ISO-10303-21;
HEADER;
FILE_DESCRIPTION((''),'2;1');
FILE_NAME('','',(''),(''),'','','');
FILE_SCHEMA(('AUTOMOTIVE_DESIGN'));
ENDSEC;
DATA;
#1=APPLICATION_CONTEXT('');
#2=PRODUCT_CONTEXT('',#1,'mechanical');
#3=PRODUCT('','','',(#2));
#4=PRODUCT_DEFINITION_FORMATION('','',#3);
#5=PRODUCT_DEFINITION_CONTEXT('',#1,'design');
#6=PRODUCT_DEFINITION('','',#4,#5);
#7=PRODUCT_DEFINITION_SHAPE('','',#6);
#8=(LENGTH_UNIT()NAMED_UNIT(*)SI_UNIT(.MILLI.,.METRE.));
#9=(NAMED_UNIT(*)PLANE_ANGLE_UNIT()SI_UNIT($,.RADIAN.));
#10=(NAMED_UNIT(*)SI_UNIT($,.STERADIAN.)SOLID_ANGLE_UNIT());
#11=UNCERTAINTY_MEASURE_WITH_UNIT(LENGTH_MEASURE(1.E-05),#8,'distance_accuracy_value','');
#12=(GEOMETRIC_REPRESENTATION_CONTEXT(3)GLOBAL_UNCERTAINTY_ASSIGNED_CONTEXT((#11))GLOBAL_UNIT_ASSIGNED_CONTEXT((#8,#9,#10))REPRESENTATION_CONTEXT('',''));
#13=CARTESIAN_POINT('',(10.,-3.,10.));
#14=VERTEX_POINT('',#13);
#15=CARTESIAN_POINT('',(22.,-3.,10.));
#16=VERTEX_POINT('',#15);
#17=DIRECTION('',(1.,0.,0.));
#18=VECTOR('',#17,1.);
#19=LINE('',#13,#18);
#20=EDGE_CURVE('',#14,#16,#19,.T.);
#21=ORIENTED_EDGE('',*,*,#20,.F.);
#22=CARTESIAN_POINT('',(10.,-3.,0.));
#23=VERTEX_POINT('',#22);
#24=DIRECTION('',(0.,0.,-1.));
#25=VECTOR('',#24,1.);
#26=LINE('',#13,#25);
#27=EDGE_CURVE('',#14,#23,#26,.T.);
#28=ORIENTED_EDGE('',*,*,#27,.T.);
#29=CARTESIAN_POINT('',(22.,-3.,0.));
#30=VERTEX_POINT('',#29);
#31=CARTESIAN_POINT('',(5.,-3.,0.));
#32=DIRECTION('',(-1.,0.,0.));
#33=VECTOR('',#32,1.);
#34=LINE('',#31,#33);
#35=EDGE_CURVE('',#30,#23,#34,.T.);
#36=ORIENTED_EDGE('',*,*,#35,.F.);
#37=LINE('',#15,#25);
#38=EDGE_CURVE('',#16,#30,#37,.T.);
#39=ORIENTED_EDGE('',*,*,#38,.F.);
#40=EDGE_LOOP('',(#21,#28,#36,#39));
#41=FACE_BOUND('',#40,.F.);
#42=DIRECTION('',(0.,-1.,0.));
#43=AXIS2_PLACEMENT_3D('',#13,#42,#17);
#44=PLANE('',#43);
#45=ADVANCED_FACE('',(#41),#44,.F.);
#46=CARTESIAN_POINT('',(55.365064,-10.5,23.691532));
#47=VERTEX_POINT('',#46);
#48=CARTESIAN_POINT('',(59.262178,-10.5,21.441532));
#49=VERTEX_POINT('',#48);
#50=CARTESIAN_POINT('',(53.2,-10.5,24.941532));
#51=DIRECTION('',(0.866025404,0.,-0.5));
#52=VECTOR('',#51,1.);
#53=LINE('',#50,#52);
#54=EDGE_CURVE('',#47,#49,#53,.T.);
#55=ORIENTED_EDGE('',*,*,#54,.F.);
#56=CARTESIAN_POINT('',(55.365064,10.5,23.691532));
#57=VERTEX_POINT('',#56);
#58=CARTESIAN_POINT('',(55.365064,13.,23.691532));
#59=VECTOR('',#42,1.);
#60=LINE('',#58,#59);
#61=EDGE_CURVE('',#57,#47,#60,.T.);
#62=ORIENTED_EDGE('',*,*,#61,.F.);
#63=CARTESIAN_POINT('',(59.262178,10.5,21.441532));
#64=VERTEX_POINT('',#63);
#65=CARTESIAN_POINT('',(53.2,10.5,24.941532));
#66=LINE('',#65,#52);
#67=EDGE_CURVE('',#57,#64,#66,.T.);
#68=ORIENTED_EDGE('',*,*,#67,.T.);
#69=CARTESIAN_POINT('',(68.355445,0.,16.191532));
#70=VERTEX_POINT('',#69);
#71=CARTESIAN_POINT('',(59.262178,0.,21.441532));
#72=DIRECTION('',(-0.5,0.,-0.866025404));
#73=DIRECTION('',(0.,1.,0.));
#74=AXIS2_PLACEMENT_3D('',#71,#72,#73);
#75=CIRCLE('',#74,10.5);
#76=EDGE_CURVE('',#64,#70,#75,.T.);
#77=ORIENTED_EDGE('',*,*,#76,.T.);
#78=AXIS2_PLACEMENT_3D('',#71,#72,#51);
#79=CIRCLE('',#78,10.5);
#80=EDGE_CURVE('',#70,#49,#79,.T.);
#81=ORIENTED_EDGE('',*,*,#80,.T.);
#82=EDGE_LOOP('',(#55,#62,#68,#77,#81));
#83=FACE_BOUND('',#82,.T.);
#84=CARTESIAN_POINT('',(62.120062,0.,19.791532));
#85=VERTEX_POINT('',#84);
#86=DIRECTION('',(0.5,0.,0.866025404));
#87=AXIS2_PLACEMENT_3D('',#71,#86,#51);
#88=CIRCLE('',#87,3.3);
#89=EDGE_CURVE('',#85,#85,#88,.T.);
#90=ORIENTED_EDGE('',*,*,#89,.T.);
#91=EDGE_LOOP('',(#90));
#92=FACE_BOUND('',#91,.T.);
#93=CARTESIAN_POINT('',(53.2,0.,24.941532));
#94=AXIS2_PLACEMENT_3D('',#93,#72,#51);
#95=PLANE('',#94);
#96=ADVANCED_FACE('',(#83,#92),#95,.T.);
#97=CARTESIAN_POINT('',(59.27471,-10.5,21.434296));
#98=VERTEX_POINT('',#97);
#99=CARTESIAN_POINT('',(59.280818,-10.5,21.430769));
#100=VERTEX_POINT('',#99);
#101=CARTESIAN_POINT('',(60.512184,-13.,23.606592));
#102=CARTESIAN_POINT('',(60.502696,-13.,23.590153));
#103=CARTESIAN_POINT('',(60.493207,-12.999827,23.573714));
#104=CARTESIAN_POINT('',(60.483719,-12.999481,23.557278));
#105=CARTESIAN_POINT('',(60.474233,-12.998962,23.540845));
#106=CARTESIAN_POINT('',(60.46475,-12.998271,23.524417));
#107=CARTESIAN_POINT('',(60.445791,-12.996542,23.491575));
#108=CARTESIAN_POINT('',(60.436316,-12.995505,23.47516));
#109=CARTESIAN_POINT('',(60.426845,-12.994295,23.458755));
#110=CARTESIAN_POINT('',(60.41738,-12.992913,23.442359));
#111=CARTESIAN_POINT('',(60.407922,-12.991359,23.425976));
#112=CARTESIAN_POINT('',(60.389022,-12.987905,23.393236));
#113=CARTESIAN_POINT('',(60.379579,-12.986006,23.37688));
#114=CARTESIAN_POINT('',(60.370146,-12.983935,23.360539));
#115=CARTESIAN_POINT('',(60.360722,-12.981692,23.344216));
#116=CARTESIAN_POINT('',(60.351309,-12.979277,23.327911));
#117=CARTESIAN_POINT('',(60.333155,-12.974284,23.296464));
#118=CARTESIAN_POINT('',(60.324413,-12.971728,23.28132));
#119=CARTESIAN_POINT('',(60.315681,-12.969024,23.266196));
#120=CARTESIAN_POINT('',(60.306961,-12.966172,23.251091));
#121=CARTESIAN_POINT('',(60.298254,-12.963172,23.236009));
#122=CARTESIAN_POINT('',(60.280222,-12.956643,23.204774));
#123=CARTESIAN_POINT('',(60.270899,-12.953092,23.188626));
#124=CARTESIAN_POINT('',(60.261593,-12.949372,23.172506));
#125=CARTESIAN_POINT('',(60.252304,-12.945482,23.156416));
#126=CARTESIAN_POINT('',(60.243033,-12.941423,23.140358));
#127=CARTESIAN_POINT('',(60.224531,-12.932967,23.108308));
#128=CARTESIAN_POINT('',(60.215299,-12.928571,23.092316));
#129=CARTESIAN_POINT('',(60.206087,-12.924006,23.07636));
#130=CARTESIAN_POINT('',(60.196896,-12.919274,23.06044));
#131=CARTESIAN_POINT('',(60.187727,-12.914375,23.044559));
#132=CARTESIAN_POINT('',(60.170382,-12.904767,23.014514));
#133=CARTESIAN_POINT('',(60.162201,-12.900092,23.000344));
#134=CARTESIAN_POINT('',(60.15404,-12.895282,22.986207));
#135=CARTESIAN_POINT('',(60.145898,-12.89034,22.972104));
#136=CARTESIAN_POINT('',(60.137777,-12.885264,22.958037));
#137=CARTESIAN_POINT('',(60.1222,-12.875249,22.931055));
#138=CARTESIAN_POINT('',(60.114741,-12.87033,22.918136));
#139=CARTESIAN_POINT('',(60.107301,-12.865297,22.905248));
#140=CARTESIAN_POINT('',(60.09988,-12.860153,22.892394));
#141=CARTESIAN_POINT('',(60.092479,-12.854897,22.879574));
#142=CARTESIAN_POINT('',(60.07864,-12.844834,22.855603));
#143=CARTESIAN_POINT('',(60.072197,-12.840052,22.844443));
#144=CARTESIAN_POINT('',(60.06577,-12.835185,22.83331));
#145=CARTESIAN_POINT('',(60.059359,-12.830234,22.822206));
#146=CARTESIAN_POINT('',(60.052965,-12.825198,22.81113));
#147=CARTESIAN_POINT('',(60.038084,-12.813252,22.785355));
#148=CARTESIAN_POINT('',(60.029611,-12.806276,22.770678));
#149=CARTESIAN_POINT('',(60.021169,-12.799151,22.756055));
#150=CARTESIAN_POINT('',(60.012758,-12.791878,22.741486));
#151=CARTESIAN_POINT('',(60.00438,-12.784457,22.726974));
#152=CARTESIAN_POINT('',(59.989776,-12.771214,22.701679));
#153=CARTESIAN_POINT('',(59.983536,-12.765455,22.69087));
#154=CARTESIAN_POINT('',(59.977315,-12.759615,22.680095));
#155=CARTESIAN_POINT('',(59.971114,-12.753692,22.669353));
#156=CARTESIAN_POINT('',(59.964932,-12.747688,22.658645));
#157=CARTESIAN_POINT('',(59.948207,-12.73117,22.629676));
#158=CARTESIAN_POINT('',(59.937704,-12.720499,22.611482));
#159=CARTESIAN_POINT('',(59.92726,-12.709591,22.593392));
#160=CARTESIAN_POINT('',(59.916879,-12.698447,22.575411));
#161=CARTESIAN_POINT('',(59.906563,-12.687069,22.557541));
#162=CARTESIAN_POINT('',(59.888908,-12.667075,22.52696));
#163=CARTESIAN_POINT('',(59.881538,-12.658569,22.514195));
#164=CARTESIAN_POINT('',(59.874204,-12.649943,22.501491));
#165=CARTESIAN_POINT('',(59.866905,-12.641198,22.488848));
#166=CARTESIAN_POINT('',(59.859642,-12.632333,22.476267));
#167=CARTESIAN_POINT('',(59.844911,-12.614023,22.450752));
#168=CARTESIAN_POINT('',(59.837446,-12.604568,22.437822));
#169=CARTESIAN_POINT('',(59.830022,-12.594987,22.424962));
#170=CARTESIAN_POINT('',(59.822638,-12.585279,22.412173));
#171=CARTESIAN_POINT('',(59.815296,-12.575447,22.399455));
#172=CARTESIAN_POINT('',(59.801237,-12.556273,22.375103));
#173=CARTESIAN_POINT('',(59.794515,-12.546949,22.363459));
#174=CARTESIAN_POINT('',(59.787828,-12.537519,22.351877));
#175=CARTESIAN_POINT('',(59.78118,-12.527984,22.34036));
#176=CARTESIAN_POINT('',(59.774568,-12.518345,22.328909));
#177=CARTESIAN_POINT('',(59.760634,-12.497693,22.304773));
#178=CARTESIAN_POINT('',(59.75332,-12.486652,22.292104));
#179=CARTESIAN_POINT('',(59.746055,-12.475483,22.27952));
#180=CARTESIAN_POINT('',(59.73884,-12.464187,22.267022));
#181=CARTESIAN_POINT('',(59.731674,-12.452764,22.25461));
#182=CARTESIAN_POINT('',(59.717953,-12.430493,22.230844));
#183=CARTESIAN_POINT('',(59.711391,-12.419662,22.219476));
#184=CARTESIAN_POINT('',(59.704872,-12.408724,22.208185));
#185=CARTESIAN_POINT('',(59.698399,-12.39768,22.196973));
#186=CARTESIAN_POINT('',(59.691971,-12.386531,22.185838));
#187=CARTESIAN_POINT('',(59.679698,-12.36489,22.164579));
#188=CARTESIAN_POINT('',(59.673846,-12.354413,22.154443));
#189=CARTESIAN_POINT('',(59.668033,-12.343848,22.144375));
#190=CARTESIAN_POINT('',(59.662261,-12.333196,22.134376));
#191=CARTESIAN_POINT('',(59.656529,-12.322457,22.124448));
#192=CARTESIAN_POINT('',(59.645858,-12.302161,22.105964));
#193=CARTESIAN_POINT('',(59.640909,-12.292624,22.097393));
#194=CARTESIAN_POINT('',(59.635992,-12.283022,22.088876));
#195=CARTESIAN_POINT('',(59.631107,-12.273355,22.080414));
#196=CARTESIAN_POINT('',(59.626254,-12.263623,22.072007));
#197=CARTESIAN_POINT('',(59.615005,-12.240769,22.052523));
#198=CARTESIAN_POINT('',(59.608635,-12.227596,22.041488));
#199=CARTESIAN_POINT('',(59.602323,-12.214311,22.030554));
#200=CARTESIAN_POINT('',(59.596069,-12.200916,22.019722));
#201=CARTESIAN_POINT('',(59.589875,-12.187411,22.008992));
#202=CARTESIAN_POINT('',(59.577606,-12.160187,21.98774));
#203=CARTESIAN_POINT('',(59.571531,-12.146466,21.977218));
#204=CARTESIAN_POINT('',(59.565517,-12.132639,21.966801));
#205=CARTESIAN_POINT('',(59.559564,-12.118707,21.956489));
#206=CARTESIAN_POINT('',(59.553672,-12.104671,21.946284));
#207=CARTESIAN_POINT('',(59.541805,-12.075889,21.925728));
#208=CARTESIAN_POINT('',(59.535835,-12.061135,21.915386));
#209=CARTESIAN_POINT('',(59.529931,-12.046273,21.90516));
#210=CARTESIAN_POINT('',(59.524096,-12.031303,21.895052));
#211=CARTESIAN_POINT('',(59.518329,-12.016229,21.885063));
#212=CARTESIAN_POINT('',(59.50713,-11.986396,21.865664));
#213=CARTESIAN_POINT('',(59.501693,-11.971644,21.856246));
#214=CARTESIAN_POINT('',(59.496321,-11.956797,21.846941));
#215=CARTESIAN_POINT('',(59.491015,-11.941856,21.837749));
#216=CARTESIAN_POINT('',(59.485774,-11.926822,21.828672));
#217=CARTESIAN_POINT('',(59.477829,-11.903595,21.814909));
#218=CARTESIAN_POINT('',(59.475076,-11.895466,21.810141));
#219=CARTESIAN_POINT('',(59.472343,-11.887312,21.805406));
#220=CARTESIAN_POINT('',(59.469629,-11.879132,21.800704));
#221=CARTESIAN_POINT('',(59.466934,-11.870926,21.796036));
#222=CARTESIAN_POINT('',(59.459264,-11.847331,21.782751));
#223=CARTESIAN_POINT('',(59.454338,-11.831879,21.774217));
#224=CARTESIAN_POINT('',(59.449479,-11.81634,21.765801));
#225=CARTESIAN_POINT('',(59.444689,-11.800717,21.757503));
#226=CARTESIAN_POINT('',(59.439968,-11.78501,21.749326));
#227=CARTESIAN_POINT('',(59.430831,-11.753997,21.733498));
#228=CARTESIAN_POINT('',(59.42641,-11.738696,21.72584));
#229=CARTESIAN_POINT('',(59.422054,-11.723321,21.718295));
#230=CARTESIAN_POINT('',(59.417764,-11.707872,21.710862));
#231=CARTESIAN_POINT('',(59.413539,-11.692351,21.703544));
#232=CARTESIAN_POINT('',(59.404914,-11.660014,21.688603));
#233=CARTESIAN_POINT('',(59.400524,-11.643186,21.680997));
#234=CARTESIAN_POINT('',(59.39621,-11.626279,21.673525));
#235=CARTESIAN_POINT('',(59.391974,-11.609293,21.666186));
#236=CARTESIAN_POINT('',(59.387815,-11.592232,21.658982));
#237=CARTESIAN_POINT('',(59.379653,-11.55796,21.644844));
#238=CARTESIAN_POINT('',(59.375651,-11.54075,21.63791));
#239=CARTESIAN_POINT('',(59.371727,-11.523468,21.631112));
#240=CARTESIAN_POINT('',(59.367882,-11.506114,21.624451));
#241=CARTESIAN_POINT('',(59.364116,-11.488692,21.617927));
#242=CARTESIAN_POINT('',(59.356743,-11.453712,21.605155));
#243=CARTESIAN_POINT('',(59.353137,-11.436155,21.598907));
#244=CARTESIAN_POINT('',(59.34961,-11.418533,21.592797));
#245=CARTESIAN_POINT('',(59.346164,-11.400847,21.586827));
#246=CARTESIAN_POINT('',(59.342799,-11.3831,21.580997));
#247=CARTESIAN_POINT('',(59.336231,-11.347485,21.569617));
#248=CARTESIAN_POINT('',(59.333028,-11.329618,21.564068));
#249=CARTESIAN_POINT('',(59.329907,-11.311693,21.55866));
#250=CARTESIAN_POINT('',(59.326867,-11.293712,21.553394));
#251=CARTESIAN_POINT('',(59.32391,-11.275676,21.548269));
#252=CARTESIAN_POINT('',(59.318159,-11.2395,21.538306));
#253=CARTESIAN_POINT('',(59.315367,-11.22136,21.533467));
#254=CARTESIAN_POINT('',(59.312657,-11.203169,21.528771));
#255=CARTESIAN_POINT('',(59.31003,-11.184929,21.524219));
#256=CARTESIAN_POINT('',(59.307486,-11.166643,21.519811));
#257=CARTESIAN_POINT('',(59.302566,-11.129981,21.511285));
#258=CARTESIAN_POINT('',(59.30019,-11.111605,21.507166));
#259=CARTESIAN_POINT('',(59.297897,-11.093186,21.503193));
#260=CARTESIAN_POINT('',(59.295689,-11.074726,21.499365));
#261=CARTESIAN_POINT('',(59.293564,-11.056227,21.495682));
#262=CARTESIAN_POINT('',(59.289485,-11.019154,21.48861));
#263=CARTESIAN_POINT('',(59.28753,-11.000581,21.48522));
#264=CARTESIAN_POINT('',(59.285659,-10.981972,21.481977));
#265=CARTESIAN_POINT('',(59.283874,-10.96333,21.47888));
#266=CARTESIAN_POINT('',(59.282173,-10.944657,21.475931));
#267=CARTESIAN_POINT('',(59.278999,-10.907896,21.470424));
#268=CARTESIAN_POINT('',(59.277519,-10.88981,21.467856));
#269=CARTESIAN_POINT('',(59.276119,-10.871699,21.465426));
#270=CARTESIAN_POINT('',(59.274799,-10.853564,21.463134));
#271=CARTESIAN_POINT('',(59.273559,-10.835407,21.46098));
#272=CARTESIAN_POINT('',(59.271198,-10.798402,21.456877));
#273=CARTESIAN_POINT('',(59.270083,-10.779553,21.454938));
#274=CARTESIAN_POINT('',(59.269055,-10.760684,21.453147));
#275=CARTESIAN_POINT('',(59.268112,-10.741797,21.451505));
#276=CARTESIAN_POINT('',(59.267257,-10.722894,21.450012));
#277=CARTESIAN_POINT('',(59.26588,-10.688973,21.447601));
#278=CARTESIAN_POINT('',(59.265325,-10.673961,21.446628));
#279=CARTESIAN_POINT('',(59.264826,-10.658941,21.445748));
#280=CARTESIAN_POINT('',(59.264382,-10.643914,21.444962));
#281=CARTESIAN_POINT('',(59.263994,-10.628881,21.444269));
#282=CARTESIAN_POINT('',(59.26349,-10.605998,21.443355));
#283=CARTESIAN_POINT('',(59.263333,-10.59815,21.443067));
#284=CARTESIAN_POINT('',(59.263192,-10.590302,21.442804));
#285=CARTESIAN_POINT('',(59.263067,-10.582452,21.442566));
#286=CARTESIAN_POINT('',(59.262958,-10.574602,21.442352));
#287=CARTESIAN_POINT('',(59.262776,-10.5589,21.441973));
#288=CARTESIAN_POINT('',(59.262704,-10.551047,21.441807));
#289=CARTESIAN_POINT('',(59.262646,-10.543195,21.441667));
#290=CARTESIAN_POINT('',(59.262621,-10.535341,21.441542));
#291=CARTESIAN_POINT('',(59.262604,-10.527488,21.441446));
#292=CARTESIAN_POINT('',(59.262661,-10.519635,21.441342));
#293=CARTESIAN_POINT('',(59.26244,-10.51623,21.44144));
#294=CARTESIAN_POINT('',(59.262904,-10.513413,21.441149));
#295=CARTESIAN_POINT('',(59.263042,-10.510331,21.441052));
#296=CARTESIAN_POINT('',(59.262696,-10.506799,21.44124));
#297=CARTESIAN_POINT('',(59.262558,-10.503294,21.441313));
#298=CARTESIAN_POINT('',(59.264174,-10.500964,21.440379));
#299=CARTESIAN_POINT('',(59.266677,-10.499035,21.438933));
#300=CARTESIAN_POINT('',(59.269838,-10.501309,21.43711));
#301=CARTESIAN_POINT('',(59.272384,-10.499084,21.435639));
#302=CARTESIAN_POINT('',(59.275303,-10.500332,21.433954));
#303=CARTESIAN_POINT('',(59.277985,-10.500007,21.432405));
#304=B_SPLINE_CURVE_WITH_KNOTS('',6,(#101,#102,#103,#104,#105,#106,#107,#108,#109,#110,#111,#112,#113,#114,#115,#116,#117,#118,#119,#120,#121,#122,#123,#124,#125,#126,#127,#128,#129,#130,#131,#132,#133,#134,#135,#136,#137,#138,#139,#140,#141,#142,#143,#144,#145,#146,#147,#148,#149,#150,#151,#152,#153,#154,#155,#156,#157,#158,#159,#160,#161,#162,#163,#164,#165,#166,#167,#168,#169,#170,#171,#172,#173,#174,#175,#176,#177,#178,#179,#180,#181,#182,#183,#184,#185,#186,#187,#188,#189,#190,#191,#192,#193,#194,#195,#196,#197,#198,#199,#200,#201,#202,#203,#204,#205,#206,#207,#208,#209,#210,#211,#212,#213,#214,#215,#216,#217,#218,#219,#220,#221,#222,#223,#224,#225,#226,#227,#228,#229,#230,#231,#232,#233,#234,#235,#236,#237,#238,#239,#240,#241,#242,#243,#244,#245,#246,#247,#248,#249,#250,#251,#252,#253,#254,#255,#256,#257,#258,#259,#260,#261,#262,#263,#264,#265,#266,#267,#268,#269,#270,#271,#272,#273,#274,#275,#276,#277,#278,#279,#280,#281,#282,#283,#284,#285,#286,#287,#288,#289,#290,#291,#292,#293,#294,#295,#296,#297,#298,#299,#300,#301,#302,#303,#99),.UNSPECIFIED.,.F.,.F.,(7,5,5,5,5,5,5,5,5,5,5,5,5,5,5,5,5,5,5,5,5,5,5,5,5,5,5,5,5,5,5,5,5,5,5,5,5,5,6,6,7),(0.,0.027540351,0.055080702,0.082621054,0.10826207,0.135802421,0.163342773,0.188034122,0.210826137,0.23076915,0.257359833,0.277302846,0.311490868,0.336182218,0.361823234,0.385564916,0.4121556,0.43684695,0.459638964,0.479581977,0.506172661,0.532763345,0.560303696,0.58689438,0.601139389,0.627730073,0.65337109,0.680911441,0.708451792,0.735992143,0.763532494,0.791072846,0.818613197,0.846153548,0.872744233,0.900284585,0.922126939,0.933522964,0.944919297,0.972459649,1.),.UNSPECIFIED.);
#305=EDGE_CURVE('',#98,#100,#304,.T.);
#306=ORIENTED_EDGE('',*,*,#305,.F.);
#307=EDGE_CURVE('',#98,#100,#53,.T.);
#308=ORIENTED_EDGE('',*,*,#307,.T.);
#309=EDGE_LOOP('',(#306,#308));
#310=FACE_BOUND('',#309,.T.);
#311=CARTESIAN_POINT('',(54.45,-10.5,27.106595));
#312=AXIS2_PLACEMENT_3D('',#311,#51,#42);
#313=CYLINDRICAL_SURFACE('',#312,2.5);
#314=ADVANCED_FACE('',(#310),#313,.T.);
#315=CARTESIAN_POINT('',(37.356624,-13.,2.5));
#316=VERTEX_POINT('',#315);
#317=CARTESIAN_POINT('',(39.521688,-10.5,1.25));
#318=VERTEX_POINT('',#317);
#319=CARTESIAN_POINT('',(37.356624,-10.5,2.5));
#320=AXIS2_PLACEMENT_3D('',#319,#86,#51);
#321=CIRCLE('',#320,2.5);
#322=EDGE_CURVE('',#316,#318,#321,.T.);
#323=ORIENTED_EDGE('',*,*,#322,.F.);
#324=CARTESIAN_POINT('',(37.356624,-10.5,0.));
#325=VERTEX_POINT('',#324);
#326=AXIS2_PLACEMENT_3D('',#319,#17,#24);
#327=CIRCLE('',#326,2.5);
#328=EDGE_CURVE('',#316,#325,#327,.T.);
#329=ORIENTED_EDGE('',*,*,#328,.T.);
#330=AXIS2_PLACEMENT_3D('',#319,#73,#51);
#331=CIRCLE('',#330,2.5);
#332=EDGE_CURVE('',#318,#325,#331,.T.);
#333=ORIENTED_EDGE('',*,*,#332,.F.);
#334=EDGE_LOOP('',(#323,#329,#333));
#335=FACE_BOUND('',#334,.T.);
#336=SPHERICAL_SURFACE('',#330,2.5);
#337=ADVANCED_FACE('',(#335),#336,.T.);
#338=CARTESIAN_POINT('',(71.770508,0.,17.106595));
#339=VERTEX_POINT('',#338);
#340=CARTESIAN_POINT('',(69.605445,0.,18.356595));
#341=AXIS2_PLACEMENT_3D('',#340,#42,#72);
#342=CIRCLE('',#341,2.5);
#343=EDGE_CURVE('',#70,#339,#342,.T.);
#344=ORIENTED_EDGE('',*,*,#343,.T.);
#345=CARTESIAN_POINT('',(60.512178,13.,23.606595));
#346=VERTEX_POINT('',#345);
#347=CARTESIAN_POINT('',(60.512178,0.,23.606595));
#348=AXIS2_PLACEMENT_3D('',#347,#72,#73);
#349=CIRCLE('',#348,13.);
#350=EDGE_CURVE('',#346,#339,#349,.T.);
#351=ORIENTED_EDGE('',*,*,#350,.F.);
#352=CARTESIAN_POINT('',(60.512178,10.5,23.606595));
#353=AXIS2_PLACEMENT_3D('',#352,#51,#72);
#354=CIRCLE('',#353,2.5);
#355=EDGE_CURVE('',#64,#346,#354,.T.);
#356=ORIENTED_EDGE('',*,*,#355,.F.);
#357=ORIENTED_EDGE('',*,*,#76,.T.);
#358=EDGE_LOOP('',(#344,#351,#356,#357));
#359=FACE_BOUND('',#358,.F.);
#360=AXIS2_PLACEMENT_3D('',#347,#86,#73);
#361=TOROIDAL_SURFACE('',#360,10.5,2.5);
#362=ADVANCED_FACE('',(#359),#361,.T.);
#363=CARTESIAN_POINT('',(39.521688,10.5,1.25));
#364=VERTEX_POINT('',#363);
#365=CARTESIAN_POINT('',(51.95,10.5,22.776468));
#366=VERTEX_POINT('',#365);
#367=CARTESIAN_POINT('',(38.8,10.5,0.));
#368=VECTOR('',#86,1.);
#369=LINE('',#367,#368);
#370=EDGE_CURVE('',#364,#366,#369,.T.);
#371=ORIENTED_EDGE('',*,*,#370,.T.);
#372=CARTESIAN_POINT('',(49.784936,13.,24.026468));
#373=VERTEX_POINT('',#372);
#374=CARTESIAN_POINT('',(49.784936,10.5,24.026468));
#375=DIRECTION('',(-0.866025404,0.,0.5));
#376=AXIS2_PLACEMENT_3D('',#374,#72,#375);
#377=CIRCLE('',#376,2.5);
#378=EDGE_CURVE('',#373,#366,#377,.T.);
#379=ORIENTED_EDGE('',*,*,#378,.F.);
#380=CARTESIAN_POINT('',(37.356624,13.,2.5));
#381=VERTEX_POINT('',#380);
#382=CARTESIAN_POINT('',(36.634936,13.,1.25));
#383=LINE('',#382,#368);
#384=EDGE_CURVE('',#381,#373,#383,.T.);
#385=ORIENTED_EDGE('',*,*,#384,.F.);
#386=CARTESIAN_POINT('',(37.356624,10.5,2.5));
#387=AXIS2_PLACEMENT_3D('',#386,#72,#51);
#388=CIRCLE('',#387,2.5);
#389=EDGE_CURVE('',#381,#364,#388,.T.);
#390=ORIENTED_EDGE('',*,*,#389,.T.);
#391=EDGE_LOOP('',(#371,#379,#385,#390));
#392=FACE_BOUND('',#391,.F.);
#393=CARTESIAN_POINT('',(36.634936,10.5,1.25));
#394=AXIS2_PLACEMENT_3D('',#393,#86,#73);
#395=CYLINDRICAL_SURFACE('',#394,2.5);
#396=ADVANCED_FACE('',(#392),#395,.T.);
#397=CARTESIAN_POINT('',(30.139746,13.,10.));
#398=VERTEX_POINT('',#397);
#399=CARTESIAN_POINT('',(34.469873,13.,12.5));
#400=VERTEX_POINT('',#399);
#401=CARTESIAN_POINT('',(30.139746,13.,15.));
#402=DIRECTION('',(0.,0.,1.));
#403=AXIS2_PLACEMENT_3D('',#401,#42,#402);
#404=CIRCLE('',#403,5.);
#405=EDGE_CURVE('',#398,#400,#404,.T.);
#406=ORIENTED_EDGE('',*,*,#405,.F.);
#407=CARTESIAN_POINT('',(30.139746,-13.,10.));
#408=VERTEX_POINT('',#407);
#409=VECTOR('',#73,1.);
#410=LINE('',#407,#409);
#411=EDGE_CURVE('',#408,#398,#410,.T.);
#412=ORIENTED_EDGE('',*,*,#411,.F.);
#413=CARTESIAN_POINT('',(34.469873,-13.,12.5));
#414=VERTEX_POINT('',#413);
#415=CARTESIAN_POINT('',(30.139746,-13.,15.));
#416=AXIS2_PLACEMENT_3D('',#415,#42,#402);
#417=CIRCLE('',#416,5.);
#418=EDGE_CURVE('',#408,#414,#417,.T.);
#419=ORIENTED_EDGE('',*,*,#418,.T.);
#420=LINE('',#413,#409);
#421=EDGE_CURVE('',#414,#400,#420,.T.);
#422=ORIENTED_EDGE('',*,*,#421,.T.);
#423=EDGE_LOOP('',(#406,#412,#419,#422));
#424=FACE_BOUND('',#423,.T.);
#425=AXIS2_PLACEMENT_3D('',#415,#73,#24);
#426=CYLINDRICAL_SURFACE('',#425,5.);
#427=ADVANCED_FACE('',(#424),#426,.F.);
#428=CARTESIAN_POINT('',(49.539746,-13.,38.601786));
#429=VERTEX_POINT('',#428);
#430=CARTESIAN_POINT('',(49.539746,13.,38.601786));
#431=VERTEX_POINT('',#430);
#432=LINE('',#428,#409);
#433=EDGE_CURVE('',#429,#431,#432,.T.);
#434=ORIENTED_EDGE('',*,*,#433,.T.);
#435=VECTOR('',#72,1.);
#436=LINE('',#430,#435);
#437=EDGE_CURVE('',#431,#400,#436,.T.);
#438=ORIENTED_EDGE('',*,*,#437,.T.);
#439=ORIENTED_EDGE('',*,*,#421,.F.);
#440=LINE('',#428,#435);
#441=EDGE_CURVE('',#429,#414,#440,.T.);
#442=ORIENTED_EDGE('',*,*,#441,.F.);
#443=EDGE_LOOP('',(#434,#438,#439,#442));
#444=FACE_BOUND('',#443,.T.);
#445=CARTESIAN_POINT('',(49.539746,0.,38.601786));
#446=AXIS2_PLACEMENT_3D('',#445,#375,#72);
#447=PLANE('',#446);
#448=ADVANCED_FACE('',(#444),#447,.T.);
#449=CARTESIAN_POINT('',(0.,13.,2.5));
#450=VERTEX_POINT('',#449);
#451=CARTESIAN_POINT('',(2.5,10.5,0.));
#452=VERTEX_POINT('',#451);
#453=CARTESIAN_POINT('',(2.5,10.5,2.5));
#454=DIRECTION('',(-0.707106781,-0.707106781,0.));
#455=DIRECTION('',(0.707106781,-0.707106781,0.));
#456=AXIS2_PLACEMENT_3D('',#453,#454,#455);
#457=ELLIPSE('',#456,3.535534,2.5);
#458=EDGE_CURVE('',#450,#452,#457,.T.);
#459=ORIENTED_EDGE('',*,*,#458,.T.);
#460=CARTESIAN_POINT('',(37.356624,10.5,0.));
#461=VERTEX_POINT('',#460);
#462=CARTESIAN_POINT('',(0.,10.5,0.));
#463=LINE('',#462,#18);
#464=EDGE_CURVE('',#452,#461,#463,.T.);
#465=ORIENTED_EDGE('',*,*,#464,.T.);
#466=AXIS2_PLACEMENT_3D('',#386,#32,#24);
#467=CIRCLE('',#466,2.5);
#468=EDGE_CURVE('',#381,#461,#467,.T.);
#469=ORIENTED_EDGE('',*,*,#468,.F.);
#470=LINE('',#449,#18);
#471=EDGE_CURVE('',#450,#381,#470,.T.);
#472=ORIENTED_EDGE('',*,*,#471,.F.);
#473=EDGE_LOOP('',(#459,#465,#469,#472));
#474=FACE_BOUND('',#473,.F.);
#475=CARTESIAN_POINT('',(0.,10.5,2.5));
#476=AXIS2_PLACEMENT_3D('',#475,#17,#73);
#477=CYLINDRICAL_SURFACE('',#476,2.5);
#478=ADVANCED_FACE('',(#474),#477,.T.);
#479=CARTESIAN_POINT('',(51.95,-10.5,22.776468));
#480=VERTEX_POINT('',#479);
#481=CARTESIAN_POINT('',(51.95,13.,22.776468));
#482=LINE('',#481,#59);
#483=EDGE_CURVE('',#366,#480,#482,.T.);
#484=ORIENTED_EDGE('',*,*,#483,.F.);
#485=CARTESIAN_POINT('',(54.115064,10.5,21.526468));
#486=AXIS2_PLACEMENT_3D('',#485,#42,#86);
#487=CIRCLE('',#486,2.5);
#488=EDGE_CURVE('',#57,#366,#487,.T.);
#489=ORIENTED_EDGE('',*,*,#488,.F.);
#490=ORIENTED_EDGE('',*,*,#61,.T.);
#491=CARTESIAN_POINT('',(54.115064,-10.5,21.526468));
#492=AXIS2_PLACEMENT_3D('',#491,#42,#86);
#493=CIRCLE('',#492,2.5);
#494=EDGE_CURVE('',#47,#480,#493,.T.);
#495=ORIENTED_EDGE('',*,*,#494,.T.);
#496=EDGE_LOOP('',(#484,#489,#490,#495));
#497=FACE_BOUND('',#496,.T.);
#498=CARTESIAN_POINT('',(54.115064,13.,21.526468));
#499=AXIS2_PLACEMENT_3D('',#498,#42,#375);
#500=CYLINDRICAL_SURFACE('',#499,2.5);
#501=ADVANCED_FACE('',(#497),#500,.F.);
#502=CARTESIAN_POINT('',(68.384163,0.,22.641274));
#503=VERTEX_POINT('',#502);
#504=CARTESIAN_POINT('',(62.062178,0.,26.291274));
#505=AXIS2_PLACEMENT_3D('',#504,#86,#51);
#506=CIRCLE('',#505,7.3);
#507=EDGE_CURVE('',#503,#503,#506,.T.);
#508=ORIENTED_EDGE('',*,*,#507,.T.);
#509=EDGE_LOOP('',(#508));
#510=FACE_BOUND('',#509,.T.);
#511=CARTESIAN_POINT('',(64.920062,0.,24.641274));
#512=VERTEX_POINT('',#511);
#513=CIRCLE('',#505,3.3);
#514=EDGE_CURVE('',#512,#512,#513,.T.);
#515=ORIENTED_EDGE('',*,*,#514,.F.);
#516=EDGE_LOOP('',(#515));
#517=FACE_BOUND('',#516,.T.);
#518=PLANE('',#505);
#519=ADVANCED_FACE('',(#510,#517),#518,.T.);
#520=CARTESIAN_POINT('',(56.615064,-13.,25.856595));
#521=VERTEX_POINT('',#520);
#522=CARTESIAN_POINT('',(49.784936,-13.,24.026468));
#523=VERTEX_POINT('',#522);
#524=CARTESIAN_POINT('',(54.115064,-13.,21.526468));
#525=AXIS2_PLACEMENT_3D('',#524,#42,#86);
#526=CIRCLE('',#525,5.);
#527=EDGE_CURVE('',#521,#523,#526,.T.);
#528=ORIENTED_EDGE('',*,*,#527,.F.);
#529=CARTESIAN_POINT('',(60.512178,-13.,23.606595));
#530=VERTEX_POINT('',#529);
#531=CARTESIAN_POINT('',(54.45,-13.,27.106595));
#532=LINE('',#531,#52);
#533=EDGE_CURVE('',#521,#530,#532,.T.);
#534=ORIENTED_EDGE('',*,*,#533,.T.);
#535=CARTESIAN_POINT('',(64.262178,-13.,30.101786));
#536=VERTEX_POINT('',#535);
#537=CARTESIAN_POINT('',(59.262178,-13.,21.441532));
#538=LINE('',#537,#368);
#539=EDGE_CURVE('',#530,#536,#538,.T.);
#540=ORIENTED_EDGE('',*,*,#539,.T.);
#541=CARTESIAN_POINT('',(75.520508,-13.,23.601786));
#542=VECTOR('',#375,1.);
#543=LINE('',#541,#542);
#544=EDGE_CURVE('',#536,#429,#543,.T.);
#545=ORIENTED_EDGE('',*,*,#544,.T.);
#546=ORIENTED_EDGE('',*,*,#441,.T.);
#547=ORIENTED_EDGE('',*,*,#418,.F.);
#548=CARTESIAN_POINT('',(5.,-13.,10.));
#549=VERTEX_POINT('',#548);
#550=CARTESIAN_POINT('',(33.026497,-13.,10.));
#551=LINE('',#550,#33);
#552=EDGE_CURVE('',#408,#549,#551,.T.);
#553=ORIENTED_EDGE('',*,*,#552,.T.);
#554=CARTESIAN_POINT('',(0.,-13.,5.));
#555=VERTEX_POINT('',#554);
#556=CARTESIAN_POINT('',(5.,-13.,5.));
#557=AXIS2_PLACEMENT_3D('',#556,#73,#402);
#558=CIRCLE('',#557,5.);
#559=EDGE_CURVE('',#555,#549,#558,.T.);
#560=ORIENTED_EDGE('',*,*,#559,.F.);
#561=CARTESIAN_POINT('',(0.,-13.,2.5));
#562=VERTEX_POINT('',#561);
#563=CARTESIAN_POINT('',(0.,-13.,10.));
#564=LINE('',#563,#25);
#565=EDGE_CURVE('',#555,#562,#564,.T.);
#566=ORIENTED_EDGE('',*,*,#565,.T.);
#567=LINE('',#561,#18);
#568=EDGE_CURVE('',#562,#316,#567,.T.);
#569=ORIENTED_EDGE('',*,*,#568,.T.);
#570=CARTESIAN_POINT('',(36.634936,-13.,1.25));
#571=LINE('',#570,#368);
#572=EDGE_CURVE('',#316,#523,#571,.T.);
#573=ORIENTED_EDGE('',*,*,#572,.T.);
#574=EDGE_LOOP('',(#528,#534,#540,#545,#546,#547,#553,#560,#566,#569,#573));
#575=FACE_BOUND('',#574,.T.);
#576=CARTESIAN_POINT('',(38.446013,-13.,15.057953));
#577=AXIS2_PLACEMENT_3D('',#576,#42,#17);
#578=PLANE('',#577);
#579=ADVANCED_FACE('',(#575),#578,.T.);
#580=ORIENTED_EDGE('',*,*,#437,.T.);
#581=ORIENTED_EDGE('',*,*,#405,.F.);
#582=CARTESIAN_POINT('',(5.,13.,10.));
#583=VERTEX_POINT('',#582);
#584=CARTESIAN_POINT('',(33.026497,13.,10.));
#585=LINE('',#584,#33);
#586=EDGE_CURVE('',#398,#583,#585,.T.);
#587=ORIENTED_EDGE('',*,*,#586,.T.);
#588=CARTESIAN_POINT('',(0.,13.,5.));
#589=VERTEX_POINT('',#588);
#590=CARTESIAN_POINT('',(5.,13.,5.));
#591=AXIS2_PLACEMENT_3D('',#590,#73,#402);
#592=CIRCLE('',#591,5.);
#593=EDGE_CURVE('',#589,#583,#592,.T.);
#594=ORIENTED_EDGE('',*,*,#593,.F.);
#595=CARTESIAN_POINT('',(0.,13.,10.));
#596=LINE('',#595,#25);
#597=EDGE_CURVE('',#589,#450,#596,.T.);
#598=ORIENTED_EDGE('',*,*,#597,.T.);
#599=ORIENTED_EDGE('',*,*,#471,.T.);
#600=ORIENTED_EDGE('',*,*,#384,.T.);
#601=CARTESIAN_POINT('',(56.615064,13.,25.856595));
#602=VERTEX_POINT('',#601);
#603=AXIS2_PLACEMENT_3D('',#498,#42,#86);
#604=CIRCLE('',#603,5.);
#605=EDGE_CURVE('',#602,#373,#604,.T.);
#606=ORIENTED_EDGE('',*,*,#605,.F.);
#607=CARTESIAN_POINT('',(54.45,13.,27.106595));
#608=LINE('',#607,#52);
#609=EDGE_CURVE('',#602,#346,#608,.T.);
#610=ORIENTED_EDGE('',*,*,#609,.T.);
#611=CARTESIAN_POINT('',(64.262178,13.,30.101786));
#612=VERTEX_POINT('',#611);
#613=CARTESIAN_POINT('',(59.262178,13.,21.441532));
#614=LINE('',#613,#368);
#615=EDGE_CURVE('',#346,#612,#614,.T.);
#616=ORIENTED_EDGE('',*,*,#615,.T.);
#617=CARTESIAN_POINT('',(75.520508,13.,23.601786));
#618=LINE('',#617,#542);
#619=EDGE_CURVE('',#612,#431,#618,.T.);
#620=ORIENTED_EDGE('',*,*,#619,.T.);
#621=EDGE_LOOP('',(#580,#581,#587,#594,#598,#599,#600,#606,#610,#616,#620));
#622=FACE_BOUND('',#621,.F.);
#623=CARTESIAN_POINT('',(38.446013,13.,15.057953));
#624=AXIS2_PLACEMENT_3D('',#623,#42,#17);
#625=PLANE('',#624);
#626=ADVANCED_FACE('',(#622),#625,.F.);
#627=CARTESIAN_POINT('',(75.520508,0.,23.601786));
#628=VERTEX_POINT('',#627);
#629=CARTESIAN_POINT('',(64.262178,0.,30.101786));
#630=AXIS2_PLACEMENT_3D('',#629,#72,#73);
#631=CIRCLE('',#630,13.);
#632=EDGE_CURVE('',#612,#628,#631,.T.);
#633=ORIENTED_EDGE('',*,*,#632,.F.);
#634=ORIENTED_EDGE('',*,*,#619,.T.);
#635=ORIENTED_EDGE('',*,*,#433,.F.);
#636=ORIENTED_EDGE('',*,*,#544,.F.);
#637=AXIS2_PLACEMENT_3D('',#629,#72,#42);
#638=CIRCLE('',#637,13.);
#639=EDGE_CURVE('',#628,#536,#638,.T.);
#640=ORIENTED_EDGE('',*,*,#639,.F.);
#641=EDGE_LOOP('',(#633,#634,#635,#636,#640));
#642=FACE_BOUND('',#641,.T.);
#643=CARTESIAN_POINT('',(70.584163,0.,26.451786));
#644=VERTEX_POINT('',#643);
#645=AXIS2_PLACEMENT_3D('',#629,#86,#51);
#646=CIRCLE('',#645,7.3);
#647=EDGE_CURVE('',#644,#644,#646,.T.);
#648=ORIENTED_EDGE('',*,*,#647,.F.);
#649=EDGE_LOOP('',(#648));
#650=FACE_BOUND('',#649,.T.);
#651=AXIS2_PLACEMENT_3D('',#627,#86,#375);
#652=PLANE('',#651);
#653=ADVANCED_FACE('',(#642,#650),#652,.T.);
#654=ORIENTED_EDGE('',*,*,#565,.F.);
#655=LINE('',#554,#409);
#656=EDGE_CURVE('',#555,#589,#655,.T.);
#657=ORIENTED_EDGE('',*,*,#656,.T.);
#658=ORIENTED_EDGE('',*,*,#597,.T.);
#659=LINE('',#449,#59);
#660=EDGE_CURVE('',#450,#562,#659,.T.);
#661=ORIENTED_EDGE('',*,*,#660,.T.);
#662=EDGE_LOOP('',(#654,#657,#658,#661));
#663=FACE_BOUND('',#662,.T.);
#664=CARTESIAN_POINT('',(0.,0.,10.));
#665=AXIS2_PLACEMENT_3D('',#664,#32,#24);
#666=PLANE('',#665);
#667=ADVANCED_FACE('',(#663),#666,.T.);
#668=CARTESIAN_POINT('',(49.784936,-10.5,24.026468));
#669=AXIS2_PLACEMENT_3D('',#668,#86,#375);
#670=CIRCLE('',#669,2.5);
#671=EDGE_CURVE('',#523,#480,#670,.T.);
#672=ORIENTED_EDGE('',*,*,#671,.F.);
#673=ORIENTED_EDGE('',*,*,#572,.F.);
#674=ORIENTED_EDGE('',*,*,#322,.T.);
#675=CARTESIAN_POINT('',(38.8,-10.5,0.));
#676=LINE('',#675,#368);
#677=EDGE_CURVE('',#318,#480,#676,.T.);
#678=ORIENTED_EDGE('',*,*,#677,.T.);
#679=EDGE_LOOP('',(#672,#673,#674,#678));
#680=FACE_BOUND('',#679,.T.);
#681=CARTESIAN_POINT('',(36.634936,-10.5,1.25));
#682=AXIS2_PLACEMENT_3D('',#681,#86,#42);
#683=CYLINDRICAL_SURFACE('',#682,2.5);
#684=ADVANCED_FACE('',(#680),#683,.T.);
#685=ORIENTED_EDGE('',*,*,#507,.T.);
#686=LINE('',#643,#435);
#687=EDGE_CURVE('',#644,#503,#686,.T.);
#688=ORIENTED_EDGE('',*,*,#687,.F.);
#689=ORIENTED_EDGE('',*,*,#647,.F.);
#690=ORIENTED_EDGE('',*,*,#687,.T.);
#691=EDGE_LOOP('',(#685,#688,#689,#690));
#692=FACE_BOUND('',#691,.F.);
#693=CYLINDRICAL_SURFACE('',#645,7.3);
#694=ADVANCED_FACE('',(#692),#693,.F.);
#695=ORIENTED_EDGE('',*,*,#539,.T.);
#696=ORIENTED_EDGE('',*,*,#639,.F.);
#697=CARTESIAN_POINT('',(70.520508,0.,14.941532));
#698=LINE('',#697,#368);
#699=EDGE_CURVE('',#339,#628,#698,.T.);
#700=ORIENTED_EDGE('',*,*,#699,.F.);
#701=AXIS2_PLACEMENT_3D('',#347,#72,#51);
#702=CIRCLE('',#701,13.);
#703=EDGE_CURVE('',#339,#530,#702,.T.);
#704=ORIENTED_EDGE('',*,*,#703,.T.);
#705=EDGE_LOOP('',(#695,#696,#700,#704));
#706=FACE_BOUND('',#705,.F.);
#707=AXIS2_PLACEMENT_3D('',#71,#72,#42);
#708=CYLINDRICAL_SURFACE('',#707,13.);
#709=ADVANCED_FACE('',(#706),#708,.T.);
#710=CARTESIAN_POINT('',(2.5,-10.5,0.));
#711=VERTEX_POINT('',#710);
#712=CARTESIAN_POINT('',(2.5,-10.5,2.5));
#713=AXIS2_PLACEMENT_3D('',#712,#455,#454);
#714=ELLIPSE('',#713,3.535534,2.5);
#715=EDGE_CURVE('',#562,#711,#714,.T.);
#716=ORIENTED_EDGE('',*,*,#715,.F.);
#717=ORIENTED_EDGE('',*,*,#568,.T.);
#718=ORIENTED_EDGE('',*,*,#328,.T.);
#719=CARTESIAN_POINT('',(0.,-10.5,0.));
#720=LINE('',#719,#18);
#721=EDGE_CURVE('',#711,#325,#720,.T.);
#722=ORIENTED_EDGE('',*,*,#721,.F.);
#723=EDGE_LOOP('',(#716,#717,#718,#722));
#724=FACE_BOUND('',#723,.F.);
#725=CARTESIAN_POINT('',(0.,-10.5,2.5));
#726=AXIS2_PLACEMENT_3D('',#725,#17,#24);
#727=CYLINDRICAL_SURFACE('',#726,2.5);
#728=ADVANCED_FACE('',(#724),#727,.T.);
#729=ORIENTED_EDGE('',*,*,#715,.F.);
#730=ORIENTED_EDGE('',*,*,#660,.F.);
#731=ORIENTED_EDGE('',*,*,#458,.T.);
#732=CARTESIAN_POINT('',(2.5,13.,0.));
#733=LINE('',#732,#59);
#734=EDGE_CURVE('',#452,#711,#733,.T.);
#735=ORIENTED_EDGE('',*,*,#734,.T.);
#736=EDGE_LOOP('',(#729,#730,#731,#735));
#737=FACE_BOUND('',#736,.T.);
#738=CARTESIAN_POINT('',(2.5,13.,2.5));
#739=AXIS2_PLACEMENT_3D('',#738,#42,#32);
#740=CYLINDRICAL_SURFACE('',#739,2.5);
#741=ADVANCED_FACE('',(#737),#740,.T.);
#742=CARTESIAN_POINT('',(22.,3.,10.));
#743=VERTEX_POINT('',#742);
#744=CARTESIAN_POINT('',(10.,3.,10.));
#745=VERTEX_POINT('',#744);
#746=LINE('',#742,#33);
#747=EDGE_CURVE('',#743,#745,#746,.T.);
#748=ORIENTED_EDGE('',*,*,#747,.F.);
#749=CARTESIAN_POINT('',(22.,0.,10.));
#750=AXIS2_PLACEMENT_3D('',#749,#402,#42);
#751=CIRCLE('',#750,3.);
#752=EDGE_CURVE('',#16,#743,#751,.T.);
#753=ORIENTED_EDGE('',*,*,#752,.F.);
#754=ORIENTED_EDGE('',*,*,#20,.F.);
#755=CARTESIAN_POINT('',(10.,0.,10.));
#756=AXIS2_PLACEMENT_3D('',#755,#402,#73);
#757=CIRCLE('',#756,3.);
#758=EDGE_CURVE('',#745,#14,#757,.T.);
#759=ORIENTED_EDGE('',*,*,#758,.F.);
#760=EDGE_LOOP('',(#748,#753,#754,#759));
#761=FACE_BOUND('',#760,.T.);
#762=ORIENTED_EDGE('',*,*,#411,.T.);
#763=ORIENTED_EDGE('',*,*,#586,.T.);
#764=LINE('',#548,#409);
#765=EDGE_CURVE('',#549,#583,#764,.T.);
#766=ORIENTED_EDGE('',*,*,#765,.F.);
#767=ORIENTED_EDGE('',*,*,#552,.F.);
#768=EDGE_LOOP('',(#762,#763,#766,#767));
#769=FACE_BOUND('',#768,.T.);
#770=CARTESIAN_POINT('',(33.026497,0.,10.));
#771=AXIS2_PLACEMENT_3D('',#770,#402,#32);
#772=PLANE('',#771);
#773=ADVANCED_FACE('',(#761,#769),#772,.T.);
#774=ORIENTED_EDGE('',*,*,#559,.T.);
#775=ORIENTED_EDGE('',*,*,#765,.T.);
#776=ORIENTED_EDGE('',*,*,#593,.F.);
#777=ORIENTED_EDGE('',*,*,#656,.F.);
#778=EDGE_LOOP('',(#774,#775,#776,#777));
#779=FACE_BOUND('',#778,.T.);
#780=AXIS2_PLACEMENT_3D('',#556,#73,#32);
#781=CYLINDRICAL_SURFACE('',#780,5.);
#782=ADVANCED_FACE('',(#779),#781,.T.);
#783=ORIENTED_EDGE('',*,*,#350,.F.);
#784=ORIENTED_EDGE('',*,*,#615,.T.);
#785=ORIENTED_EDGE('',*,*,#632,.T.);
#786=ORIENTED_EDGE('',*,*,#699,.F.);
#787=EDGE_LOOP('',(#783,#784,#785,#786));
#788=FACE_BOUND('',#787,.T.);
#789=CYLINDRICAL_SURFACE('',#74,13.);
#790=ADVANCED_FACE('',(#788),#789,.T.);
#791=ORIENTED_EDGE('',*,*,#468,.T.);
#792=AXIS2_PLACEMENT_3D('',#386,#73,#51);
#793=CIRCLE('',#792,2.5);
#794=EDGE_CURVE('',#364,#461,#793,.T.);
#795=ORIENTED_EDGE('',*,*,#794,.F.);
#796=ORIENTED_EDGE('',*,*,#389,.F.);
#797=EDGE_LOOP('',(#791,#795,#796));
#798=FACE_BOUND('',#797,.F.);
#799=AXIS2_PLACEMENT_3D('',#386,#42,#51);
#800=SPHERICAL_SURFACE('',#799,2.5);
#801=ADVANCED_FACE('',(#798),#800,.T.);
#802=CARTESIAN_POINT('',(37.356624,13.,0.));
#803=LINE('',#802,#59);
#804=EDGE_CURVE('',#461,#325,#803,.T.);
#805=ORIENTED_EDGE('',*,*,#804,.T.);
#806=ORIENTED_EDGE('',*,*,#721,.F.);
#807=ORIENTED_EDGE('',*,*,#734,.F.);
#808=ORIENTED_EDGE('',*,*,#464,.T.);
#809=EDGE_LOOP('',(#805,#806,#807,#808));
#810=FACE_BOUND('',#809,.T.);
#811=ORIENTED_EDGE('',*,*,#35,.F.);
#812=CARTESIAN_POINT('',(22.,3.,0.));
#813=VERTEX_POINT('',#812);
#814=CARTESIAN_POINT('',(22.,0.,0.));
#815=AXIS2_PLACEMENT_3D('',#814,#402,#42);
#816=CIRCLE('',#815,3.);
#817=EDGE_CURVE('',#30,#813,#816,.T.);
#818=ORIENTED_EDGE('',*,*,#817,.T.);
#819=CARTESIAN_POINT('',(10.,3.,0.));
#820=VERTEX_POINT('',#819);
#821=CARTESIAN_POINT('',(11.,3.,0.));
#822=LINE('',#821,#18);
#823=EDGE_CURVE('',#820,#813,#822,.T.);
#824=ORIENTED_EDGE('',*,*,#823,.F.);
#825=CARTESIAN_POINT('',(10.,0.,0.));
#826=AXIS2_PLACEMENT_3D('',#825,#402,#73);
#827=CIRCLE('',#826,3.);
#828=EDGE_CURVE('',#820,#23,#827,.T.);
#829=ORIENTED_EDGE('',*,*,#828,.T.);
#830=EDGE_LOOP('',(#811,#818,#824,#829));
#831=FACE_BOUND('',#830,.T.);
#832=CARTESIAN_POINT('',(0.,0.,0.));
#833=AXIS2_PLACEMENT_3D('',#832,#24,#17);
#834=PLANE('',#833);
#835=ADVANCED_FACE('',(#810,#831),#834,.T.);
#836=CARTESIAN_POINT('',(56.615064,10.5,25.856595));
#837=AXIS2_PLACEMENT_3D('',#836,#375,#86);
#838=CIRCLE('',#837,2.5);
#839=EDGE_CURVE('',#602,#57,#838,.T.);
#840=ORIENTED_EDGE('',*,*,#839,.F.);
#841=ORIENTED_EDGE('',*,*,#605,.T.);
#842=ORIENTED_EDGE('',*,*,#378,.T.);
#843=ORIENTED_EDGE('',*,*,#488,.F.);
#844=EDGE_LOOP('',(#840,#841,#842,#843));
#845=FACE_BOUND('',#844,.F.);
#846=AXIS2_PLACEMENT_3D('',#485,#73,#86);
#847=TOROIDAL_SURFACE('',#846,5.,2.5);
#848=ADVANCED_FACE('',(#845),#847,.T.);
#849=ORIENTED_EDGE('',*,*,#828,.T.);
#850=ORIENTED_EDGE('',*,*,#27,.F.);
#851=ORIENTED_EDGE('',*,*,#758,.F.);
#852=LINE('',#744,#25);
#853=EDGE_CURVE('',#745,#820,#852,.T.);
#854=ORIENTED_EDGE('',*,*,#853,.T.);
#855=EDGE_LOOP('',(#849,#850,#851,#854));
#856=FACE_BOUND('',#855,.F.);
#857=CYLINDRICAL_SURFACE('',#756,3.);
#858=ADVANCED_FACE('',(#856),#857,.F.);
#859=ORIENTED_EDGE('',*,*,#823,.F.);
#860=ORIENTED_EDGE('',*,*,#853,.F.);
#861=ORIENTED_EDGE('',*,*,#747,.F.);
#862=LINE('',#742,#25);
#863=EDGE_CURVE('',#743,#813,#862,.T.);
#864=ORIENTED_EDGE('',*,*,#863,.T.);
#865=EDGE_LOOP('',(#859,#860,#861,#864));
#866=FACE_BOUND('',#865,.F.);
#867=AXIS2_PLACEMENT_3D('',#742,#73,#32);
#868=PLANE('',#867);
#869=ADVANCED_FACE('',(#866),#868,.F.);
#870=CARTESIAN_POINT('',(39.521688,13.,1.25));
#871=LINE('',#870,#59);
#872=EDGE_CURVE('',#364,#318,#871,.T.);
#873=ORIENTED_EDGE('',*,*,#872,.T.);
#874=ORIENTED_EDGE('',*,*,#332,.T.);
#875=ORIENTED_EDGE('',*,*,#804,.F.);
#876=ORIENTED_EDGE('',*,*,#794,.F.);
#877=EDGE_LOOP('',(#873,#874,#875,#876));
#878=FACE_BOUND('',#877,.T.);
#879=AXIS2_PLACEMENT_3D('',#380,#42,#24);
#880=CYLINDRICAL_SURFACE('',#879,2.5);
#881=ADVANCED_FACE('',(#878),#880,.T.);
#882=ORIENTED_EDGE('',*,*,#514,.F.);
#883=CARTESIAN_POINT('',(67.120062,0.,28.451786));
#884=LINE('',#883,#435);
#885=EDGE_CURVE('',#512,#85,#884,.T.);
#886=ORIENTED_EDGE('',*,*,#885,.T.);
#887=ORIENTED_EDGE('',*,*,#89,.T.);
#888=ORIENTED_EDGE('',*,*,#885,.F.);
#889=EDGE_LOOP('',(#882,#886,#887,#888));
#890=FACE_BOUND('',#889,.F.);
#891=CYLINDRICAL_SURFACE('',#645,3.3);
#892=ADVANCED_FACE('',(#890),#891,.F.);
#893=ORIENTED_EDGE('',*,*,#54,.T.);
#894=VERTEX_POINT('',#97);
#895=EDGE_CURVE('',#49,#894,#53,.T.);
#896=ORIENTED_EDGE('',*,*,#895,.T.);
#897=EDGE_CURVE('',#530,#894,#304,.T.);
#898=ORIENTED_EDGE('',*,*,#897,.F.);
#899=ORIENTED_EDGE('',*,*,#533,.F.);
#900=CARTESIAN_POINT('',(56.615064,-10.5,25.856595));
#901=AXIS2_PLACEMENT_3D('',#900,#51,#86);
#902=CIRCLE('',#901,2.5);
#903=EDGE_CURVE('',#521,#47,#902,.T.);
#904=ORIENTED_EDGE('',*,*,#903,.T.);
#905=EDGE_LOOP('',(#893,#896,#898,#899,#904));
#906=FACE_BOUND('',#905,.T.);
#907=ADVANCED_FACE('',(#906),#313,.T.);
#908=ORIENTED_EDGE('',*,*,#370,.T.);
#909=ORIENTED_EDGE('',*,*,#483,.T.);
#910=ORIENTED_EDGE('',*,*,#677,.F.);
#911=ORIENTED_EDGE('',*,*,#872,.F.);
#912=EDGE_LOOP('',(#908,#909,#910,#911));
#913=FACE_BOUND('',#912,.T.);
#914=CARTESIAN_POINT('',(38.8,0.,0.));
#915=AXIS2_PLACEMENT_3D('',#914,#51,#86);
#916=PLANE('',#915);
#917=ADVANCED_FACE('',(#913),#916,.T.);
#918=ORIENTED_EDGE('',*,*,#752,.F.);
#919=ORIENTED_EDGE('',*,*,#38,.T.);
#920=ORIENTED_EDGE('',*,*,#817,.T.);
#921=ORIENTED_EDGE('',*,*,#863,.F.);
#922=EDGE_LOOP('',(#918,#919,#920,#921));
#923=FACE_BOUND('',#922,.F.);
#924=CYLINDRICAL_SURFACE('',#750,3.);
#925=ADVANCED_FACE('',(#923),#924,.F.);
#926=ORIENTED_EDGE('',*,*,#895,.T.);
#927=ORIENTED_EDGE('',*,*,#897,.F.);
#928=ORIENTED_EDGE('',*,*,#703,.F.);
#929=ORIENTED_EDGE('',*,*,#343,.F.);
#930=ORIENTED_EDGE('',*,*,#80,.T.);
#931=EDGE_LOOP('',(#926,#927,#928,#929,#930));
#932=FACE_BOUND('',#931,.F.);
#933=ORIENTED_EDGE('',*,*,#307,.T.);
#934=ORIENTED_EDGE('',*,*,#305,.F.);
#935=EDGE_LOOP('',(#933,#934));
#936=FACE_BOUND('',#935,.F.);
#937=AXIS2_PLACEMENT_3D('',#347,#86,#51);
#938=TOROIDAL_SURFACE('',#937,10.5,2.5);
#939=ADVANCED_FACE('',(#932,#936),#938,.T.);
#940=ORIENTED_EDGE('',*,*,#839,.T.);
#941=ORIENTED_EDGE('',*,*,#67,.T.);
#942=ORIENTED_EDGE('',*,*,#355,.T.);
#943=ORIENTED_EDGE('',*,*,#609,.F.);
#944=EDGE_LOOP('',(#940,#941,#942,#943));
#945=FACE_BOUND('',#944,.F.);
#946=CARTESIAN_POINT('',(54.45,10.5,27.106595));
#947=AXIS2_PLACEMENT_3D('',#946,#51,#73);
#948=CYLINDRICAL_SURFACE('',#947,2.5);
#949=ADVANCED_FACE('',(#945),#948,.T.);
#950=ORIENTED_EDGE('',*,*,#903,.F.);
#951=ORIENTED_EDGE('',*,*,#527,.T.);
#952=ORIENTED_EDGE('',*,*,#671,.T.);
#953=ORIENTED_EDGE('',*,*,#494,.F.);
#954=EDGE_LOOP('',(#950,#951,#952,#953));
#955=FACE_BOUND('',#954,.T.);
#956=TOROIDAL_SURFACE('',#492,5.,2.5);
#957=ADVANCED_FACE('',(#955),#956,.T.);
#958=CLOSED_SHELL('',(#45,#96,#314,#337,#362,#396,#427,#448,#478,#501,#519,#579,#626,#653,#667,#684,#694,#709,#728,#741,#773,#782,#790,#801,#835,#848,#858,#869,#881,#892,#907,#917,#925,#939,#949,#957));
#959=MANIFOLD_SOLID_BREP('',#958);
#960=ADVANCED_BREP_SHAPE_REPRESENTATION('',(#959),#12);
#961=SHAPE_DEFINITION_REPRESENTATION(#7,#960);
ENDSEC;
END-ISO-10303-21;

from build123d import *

# Parameters (mm, degrees)
F1_DEPTH    = 13
F3_DEPTH    = 10.001
F4_R        = 5
F5_R        = 2.5
F6_T1_DEPTH = 42.5
F6_T4_ANGLE = 90
F6_T6_ANGLE = 90
F7_R        = 3.3
F8_DEPTH    = 58.201
F7_R_2      = 7.3
F10_DEPTH   = 4.4


# Not quite as in the source:
# - a fillet or chamfer that OpenCascade refuses, or shapes differently, is made with other operations: its cross-section is extruded or revolved along the edge and cut away or added


with BuildPart() as f1:
    # F0 (on Front) → F1 (new body, symmetric)
    with BuildSketch(Plane.XZ):
        Polygon((0, 10), (0, 0), (38.8, 0), (53.2, 24.941531629), (70.5205080757, 14.941531629), (75.5205080757, 23.6017856668), (49.5397459622, 38.6017856668), (33.0264973081, 10), align=None)
    extrude(amount=F1_DEPTH, both=True)

    # F2 (on face) → F3 (cut, through all)
    with BuildSketch(Plane.XY.offset(10)):
        with BuildLine():
            ThreePointArc((10, 3), (7, 0), (10, -3))
            Line((10, -3), (22, -3))
            ThreePointArc((22, -3), (25, 0), (22, 3))
            Line((22, 3), (10, 3))
        make_face()
    extrude(amount=-F3_DEPTH, mode=Mode.SUBTRACT)

    # F4
    f4_edges = [f1.edges().sort_by_distance(p)[0] for p in [
        (0, 0, 10),
        (33.026497, 0, 10),
    ]]
    fillet(f4_edges, radius=F4_R)

    # F5
    f5_edges = [f1.edges().sort_by_distance(p)[0] for p in [
        (0, 0, 0),
        (19.4, -13, 0),
        (19.4, 13, 0),
        (38.8, 0, 0),
        (46, -13, 12.470766),
        (46, 13, 12.470766),
        (53.2, 0, 24.941532),
        (61.860254, -13, 19.941532),
        (61.860254, 13, 19.941532),
        (70.520508, 0, 14.941532),
    ]]
    fillet(f5_edges, radius=F5_R)

    # F6: fillet of radius 13 on 2 edges, made by hand

    # F6_s2 → F6_t1 (cut)
    with BuildSketch(Plane(origin=(24.1, 0, 41.7424244624), x_dir=(0, 1, 0), z_dir=(0.5, 0, 0.8660254038))):
        with BuildLine():
            ThreePointArc((-13, -40.6017856668), (-9.1923881554, -49.7941738223), (0, -53.6017856668))
            Line((0, -53.6017856668), (-13, -53.6017856668))
            Line((-13, -53.6017856668), (-13, -40.6017856668))
        make_face()
        with BuildLine():
            ThreePointArc((13, -40.6017856668), (9.1923881554, -49.7941738223), (0, -53.6017856668))
            Line((0, -53.6017856668), (13, -53.6017856668))
            Line((13, -53.6017856668), (13, -40.6017856668))
        make_face()
    extrude(amount=F6_T1_DEPTH, mode=Mode.SUBTRACT)

    # F6_s3 → F6_t4 (revolve, cut)
    with BuildSketch(Plane(origin=(35.1621778265, 0, -20.3008928334), x_dir=(0, 1, 0), z_dir=(-0.8660254038, 0, 0.5))):
        with BuildLine():
            ThreePointArc((10.5, -48.2), (12.267766953, -48.932233047), (13, -50.7))
            Line((13, -50.7), (13, -48.2))
            Line((13, -48.2), (10.5, -48.2))
        make_face()
    revolve(axis=Axis((59.2621778265, 0, 21.441531629), (-0.5, 0, -0.8660254038)), revolution_arc=F6_T4_ANGLE, mode=Mode.SUBTRACT)

    # F6_s5 → F6_t6 (revolve, cut)
    with BuildSketch(Plane.XZ):
        with BuildLine():
            ThreePointArc((68.3554445662, 16.191531629), (70.252492179, 15.9417805727), (71.7705080757, 17.1065951385))
            Line((71.7705080757, 17.1065951385), (70.5205080757, 14.941531629))
            Line((70.5205080757, 14.941531629), (68.3554445662, 16.191531629))
        make_face()
    revolve(axis=Axis((59.2621778265, 0, 21.441531629), (-0.5, 0, -0.8660254038)), revolution_arc=F6_T6_ANGLE, mode=Mode.SUBTRACT)

    # F7 (on face) → F8 (cut, through all)
    with BuildSketch(Plane(origin=(29.1, 0, 50.4026785003), x_dir=(0.8660254038, 0, -0.5), z_dir=(0.5, 0, 0.8660254038))):
        with Locations((40.6017856668, 0)):
            Circle(F7_R)
    extrude(amount=-F8_DEPTH, mode=Mode.SUBTRACT)

    # F7 (on face) → F10 (cut)
    with BuildSketch(Plane(origin=(29.1, 0, 50.4026785003), x_dir=(0.8660254038, 0, -0.5), z_dir=(0.5, 0, 0.8660254038))):
        with Locations((40.6017856668, 0)):
            Circle(F7_R_2)
        with Locations((40.6017856668, 0)):
            Circle(F7_R, mode=Mode.SUBTRACT)
    extrude(amount=-F10_DEPTH, mode=Mode.SUBTRACT)


solid = f1.part
